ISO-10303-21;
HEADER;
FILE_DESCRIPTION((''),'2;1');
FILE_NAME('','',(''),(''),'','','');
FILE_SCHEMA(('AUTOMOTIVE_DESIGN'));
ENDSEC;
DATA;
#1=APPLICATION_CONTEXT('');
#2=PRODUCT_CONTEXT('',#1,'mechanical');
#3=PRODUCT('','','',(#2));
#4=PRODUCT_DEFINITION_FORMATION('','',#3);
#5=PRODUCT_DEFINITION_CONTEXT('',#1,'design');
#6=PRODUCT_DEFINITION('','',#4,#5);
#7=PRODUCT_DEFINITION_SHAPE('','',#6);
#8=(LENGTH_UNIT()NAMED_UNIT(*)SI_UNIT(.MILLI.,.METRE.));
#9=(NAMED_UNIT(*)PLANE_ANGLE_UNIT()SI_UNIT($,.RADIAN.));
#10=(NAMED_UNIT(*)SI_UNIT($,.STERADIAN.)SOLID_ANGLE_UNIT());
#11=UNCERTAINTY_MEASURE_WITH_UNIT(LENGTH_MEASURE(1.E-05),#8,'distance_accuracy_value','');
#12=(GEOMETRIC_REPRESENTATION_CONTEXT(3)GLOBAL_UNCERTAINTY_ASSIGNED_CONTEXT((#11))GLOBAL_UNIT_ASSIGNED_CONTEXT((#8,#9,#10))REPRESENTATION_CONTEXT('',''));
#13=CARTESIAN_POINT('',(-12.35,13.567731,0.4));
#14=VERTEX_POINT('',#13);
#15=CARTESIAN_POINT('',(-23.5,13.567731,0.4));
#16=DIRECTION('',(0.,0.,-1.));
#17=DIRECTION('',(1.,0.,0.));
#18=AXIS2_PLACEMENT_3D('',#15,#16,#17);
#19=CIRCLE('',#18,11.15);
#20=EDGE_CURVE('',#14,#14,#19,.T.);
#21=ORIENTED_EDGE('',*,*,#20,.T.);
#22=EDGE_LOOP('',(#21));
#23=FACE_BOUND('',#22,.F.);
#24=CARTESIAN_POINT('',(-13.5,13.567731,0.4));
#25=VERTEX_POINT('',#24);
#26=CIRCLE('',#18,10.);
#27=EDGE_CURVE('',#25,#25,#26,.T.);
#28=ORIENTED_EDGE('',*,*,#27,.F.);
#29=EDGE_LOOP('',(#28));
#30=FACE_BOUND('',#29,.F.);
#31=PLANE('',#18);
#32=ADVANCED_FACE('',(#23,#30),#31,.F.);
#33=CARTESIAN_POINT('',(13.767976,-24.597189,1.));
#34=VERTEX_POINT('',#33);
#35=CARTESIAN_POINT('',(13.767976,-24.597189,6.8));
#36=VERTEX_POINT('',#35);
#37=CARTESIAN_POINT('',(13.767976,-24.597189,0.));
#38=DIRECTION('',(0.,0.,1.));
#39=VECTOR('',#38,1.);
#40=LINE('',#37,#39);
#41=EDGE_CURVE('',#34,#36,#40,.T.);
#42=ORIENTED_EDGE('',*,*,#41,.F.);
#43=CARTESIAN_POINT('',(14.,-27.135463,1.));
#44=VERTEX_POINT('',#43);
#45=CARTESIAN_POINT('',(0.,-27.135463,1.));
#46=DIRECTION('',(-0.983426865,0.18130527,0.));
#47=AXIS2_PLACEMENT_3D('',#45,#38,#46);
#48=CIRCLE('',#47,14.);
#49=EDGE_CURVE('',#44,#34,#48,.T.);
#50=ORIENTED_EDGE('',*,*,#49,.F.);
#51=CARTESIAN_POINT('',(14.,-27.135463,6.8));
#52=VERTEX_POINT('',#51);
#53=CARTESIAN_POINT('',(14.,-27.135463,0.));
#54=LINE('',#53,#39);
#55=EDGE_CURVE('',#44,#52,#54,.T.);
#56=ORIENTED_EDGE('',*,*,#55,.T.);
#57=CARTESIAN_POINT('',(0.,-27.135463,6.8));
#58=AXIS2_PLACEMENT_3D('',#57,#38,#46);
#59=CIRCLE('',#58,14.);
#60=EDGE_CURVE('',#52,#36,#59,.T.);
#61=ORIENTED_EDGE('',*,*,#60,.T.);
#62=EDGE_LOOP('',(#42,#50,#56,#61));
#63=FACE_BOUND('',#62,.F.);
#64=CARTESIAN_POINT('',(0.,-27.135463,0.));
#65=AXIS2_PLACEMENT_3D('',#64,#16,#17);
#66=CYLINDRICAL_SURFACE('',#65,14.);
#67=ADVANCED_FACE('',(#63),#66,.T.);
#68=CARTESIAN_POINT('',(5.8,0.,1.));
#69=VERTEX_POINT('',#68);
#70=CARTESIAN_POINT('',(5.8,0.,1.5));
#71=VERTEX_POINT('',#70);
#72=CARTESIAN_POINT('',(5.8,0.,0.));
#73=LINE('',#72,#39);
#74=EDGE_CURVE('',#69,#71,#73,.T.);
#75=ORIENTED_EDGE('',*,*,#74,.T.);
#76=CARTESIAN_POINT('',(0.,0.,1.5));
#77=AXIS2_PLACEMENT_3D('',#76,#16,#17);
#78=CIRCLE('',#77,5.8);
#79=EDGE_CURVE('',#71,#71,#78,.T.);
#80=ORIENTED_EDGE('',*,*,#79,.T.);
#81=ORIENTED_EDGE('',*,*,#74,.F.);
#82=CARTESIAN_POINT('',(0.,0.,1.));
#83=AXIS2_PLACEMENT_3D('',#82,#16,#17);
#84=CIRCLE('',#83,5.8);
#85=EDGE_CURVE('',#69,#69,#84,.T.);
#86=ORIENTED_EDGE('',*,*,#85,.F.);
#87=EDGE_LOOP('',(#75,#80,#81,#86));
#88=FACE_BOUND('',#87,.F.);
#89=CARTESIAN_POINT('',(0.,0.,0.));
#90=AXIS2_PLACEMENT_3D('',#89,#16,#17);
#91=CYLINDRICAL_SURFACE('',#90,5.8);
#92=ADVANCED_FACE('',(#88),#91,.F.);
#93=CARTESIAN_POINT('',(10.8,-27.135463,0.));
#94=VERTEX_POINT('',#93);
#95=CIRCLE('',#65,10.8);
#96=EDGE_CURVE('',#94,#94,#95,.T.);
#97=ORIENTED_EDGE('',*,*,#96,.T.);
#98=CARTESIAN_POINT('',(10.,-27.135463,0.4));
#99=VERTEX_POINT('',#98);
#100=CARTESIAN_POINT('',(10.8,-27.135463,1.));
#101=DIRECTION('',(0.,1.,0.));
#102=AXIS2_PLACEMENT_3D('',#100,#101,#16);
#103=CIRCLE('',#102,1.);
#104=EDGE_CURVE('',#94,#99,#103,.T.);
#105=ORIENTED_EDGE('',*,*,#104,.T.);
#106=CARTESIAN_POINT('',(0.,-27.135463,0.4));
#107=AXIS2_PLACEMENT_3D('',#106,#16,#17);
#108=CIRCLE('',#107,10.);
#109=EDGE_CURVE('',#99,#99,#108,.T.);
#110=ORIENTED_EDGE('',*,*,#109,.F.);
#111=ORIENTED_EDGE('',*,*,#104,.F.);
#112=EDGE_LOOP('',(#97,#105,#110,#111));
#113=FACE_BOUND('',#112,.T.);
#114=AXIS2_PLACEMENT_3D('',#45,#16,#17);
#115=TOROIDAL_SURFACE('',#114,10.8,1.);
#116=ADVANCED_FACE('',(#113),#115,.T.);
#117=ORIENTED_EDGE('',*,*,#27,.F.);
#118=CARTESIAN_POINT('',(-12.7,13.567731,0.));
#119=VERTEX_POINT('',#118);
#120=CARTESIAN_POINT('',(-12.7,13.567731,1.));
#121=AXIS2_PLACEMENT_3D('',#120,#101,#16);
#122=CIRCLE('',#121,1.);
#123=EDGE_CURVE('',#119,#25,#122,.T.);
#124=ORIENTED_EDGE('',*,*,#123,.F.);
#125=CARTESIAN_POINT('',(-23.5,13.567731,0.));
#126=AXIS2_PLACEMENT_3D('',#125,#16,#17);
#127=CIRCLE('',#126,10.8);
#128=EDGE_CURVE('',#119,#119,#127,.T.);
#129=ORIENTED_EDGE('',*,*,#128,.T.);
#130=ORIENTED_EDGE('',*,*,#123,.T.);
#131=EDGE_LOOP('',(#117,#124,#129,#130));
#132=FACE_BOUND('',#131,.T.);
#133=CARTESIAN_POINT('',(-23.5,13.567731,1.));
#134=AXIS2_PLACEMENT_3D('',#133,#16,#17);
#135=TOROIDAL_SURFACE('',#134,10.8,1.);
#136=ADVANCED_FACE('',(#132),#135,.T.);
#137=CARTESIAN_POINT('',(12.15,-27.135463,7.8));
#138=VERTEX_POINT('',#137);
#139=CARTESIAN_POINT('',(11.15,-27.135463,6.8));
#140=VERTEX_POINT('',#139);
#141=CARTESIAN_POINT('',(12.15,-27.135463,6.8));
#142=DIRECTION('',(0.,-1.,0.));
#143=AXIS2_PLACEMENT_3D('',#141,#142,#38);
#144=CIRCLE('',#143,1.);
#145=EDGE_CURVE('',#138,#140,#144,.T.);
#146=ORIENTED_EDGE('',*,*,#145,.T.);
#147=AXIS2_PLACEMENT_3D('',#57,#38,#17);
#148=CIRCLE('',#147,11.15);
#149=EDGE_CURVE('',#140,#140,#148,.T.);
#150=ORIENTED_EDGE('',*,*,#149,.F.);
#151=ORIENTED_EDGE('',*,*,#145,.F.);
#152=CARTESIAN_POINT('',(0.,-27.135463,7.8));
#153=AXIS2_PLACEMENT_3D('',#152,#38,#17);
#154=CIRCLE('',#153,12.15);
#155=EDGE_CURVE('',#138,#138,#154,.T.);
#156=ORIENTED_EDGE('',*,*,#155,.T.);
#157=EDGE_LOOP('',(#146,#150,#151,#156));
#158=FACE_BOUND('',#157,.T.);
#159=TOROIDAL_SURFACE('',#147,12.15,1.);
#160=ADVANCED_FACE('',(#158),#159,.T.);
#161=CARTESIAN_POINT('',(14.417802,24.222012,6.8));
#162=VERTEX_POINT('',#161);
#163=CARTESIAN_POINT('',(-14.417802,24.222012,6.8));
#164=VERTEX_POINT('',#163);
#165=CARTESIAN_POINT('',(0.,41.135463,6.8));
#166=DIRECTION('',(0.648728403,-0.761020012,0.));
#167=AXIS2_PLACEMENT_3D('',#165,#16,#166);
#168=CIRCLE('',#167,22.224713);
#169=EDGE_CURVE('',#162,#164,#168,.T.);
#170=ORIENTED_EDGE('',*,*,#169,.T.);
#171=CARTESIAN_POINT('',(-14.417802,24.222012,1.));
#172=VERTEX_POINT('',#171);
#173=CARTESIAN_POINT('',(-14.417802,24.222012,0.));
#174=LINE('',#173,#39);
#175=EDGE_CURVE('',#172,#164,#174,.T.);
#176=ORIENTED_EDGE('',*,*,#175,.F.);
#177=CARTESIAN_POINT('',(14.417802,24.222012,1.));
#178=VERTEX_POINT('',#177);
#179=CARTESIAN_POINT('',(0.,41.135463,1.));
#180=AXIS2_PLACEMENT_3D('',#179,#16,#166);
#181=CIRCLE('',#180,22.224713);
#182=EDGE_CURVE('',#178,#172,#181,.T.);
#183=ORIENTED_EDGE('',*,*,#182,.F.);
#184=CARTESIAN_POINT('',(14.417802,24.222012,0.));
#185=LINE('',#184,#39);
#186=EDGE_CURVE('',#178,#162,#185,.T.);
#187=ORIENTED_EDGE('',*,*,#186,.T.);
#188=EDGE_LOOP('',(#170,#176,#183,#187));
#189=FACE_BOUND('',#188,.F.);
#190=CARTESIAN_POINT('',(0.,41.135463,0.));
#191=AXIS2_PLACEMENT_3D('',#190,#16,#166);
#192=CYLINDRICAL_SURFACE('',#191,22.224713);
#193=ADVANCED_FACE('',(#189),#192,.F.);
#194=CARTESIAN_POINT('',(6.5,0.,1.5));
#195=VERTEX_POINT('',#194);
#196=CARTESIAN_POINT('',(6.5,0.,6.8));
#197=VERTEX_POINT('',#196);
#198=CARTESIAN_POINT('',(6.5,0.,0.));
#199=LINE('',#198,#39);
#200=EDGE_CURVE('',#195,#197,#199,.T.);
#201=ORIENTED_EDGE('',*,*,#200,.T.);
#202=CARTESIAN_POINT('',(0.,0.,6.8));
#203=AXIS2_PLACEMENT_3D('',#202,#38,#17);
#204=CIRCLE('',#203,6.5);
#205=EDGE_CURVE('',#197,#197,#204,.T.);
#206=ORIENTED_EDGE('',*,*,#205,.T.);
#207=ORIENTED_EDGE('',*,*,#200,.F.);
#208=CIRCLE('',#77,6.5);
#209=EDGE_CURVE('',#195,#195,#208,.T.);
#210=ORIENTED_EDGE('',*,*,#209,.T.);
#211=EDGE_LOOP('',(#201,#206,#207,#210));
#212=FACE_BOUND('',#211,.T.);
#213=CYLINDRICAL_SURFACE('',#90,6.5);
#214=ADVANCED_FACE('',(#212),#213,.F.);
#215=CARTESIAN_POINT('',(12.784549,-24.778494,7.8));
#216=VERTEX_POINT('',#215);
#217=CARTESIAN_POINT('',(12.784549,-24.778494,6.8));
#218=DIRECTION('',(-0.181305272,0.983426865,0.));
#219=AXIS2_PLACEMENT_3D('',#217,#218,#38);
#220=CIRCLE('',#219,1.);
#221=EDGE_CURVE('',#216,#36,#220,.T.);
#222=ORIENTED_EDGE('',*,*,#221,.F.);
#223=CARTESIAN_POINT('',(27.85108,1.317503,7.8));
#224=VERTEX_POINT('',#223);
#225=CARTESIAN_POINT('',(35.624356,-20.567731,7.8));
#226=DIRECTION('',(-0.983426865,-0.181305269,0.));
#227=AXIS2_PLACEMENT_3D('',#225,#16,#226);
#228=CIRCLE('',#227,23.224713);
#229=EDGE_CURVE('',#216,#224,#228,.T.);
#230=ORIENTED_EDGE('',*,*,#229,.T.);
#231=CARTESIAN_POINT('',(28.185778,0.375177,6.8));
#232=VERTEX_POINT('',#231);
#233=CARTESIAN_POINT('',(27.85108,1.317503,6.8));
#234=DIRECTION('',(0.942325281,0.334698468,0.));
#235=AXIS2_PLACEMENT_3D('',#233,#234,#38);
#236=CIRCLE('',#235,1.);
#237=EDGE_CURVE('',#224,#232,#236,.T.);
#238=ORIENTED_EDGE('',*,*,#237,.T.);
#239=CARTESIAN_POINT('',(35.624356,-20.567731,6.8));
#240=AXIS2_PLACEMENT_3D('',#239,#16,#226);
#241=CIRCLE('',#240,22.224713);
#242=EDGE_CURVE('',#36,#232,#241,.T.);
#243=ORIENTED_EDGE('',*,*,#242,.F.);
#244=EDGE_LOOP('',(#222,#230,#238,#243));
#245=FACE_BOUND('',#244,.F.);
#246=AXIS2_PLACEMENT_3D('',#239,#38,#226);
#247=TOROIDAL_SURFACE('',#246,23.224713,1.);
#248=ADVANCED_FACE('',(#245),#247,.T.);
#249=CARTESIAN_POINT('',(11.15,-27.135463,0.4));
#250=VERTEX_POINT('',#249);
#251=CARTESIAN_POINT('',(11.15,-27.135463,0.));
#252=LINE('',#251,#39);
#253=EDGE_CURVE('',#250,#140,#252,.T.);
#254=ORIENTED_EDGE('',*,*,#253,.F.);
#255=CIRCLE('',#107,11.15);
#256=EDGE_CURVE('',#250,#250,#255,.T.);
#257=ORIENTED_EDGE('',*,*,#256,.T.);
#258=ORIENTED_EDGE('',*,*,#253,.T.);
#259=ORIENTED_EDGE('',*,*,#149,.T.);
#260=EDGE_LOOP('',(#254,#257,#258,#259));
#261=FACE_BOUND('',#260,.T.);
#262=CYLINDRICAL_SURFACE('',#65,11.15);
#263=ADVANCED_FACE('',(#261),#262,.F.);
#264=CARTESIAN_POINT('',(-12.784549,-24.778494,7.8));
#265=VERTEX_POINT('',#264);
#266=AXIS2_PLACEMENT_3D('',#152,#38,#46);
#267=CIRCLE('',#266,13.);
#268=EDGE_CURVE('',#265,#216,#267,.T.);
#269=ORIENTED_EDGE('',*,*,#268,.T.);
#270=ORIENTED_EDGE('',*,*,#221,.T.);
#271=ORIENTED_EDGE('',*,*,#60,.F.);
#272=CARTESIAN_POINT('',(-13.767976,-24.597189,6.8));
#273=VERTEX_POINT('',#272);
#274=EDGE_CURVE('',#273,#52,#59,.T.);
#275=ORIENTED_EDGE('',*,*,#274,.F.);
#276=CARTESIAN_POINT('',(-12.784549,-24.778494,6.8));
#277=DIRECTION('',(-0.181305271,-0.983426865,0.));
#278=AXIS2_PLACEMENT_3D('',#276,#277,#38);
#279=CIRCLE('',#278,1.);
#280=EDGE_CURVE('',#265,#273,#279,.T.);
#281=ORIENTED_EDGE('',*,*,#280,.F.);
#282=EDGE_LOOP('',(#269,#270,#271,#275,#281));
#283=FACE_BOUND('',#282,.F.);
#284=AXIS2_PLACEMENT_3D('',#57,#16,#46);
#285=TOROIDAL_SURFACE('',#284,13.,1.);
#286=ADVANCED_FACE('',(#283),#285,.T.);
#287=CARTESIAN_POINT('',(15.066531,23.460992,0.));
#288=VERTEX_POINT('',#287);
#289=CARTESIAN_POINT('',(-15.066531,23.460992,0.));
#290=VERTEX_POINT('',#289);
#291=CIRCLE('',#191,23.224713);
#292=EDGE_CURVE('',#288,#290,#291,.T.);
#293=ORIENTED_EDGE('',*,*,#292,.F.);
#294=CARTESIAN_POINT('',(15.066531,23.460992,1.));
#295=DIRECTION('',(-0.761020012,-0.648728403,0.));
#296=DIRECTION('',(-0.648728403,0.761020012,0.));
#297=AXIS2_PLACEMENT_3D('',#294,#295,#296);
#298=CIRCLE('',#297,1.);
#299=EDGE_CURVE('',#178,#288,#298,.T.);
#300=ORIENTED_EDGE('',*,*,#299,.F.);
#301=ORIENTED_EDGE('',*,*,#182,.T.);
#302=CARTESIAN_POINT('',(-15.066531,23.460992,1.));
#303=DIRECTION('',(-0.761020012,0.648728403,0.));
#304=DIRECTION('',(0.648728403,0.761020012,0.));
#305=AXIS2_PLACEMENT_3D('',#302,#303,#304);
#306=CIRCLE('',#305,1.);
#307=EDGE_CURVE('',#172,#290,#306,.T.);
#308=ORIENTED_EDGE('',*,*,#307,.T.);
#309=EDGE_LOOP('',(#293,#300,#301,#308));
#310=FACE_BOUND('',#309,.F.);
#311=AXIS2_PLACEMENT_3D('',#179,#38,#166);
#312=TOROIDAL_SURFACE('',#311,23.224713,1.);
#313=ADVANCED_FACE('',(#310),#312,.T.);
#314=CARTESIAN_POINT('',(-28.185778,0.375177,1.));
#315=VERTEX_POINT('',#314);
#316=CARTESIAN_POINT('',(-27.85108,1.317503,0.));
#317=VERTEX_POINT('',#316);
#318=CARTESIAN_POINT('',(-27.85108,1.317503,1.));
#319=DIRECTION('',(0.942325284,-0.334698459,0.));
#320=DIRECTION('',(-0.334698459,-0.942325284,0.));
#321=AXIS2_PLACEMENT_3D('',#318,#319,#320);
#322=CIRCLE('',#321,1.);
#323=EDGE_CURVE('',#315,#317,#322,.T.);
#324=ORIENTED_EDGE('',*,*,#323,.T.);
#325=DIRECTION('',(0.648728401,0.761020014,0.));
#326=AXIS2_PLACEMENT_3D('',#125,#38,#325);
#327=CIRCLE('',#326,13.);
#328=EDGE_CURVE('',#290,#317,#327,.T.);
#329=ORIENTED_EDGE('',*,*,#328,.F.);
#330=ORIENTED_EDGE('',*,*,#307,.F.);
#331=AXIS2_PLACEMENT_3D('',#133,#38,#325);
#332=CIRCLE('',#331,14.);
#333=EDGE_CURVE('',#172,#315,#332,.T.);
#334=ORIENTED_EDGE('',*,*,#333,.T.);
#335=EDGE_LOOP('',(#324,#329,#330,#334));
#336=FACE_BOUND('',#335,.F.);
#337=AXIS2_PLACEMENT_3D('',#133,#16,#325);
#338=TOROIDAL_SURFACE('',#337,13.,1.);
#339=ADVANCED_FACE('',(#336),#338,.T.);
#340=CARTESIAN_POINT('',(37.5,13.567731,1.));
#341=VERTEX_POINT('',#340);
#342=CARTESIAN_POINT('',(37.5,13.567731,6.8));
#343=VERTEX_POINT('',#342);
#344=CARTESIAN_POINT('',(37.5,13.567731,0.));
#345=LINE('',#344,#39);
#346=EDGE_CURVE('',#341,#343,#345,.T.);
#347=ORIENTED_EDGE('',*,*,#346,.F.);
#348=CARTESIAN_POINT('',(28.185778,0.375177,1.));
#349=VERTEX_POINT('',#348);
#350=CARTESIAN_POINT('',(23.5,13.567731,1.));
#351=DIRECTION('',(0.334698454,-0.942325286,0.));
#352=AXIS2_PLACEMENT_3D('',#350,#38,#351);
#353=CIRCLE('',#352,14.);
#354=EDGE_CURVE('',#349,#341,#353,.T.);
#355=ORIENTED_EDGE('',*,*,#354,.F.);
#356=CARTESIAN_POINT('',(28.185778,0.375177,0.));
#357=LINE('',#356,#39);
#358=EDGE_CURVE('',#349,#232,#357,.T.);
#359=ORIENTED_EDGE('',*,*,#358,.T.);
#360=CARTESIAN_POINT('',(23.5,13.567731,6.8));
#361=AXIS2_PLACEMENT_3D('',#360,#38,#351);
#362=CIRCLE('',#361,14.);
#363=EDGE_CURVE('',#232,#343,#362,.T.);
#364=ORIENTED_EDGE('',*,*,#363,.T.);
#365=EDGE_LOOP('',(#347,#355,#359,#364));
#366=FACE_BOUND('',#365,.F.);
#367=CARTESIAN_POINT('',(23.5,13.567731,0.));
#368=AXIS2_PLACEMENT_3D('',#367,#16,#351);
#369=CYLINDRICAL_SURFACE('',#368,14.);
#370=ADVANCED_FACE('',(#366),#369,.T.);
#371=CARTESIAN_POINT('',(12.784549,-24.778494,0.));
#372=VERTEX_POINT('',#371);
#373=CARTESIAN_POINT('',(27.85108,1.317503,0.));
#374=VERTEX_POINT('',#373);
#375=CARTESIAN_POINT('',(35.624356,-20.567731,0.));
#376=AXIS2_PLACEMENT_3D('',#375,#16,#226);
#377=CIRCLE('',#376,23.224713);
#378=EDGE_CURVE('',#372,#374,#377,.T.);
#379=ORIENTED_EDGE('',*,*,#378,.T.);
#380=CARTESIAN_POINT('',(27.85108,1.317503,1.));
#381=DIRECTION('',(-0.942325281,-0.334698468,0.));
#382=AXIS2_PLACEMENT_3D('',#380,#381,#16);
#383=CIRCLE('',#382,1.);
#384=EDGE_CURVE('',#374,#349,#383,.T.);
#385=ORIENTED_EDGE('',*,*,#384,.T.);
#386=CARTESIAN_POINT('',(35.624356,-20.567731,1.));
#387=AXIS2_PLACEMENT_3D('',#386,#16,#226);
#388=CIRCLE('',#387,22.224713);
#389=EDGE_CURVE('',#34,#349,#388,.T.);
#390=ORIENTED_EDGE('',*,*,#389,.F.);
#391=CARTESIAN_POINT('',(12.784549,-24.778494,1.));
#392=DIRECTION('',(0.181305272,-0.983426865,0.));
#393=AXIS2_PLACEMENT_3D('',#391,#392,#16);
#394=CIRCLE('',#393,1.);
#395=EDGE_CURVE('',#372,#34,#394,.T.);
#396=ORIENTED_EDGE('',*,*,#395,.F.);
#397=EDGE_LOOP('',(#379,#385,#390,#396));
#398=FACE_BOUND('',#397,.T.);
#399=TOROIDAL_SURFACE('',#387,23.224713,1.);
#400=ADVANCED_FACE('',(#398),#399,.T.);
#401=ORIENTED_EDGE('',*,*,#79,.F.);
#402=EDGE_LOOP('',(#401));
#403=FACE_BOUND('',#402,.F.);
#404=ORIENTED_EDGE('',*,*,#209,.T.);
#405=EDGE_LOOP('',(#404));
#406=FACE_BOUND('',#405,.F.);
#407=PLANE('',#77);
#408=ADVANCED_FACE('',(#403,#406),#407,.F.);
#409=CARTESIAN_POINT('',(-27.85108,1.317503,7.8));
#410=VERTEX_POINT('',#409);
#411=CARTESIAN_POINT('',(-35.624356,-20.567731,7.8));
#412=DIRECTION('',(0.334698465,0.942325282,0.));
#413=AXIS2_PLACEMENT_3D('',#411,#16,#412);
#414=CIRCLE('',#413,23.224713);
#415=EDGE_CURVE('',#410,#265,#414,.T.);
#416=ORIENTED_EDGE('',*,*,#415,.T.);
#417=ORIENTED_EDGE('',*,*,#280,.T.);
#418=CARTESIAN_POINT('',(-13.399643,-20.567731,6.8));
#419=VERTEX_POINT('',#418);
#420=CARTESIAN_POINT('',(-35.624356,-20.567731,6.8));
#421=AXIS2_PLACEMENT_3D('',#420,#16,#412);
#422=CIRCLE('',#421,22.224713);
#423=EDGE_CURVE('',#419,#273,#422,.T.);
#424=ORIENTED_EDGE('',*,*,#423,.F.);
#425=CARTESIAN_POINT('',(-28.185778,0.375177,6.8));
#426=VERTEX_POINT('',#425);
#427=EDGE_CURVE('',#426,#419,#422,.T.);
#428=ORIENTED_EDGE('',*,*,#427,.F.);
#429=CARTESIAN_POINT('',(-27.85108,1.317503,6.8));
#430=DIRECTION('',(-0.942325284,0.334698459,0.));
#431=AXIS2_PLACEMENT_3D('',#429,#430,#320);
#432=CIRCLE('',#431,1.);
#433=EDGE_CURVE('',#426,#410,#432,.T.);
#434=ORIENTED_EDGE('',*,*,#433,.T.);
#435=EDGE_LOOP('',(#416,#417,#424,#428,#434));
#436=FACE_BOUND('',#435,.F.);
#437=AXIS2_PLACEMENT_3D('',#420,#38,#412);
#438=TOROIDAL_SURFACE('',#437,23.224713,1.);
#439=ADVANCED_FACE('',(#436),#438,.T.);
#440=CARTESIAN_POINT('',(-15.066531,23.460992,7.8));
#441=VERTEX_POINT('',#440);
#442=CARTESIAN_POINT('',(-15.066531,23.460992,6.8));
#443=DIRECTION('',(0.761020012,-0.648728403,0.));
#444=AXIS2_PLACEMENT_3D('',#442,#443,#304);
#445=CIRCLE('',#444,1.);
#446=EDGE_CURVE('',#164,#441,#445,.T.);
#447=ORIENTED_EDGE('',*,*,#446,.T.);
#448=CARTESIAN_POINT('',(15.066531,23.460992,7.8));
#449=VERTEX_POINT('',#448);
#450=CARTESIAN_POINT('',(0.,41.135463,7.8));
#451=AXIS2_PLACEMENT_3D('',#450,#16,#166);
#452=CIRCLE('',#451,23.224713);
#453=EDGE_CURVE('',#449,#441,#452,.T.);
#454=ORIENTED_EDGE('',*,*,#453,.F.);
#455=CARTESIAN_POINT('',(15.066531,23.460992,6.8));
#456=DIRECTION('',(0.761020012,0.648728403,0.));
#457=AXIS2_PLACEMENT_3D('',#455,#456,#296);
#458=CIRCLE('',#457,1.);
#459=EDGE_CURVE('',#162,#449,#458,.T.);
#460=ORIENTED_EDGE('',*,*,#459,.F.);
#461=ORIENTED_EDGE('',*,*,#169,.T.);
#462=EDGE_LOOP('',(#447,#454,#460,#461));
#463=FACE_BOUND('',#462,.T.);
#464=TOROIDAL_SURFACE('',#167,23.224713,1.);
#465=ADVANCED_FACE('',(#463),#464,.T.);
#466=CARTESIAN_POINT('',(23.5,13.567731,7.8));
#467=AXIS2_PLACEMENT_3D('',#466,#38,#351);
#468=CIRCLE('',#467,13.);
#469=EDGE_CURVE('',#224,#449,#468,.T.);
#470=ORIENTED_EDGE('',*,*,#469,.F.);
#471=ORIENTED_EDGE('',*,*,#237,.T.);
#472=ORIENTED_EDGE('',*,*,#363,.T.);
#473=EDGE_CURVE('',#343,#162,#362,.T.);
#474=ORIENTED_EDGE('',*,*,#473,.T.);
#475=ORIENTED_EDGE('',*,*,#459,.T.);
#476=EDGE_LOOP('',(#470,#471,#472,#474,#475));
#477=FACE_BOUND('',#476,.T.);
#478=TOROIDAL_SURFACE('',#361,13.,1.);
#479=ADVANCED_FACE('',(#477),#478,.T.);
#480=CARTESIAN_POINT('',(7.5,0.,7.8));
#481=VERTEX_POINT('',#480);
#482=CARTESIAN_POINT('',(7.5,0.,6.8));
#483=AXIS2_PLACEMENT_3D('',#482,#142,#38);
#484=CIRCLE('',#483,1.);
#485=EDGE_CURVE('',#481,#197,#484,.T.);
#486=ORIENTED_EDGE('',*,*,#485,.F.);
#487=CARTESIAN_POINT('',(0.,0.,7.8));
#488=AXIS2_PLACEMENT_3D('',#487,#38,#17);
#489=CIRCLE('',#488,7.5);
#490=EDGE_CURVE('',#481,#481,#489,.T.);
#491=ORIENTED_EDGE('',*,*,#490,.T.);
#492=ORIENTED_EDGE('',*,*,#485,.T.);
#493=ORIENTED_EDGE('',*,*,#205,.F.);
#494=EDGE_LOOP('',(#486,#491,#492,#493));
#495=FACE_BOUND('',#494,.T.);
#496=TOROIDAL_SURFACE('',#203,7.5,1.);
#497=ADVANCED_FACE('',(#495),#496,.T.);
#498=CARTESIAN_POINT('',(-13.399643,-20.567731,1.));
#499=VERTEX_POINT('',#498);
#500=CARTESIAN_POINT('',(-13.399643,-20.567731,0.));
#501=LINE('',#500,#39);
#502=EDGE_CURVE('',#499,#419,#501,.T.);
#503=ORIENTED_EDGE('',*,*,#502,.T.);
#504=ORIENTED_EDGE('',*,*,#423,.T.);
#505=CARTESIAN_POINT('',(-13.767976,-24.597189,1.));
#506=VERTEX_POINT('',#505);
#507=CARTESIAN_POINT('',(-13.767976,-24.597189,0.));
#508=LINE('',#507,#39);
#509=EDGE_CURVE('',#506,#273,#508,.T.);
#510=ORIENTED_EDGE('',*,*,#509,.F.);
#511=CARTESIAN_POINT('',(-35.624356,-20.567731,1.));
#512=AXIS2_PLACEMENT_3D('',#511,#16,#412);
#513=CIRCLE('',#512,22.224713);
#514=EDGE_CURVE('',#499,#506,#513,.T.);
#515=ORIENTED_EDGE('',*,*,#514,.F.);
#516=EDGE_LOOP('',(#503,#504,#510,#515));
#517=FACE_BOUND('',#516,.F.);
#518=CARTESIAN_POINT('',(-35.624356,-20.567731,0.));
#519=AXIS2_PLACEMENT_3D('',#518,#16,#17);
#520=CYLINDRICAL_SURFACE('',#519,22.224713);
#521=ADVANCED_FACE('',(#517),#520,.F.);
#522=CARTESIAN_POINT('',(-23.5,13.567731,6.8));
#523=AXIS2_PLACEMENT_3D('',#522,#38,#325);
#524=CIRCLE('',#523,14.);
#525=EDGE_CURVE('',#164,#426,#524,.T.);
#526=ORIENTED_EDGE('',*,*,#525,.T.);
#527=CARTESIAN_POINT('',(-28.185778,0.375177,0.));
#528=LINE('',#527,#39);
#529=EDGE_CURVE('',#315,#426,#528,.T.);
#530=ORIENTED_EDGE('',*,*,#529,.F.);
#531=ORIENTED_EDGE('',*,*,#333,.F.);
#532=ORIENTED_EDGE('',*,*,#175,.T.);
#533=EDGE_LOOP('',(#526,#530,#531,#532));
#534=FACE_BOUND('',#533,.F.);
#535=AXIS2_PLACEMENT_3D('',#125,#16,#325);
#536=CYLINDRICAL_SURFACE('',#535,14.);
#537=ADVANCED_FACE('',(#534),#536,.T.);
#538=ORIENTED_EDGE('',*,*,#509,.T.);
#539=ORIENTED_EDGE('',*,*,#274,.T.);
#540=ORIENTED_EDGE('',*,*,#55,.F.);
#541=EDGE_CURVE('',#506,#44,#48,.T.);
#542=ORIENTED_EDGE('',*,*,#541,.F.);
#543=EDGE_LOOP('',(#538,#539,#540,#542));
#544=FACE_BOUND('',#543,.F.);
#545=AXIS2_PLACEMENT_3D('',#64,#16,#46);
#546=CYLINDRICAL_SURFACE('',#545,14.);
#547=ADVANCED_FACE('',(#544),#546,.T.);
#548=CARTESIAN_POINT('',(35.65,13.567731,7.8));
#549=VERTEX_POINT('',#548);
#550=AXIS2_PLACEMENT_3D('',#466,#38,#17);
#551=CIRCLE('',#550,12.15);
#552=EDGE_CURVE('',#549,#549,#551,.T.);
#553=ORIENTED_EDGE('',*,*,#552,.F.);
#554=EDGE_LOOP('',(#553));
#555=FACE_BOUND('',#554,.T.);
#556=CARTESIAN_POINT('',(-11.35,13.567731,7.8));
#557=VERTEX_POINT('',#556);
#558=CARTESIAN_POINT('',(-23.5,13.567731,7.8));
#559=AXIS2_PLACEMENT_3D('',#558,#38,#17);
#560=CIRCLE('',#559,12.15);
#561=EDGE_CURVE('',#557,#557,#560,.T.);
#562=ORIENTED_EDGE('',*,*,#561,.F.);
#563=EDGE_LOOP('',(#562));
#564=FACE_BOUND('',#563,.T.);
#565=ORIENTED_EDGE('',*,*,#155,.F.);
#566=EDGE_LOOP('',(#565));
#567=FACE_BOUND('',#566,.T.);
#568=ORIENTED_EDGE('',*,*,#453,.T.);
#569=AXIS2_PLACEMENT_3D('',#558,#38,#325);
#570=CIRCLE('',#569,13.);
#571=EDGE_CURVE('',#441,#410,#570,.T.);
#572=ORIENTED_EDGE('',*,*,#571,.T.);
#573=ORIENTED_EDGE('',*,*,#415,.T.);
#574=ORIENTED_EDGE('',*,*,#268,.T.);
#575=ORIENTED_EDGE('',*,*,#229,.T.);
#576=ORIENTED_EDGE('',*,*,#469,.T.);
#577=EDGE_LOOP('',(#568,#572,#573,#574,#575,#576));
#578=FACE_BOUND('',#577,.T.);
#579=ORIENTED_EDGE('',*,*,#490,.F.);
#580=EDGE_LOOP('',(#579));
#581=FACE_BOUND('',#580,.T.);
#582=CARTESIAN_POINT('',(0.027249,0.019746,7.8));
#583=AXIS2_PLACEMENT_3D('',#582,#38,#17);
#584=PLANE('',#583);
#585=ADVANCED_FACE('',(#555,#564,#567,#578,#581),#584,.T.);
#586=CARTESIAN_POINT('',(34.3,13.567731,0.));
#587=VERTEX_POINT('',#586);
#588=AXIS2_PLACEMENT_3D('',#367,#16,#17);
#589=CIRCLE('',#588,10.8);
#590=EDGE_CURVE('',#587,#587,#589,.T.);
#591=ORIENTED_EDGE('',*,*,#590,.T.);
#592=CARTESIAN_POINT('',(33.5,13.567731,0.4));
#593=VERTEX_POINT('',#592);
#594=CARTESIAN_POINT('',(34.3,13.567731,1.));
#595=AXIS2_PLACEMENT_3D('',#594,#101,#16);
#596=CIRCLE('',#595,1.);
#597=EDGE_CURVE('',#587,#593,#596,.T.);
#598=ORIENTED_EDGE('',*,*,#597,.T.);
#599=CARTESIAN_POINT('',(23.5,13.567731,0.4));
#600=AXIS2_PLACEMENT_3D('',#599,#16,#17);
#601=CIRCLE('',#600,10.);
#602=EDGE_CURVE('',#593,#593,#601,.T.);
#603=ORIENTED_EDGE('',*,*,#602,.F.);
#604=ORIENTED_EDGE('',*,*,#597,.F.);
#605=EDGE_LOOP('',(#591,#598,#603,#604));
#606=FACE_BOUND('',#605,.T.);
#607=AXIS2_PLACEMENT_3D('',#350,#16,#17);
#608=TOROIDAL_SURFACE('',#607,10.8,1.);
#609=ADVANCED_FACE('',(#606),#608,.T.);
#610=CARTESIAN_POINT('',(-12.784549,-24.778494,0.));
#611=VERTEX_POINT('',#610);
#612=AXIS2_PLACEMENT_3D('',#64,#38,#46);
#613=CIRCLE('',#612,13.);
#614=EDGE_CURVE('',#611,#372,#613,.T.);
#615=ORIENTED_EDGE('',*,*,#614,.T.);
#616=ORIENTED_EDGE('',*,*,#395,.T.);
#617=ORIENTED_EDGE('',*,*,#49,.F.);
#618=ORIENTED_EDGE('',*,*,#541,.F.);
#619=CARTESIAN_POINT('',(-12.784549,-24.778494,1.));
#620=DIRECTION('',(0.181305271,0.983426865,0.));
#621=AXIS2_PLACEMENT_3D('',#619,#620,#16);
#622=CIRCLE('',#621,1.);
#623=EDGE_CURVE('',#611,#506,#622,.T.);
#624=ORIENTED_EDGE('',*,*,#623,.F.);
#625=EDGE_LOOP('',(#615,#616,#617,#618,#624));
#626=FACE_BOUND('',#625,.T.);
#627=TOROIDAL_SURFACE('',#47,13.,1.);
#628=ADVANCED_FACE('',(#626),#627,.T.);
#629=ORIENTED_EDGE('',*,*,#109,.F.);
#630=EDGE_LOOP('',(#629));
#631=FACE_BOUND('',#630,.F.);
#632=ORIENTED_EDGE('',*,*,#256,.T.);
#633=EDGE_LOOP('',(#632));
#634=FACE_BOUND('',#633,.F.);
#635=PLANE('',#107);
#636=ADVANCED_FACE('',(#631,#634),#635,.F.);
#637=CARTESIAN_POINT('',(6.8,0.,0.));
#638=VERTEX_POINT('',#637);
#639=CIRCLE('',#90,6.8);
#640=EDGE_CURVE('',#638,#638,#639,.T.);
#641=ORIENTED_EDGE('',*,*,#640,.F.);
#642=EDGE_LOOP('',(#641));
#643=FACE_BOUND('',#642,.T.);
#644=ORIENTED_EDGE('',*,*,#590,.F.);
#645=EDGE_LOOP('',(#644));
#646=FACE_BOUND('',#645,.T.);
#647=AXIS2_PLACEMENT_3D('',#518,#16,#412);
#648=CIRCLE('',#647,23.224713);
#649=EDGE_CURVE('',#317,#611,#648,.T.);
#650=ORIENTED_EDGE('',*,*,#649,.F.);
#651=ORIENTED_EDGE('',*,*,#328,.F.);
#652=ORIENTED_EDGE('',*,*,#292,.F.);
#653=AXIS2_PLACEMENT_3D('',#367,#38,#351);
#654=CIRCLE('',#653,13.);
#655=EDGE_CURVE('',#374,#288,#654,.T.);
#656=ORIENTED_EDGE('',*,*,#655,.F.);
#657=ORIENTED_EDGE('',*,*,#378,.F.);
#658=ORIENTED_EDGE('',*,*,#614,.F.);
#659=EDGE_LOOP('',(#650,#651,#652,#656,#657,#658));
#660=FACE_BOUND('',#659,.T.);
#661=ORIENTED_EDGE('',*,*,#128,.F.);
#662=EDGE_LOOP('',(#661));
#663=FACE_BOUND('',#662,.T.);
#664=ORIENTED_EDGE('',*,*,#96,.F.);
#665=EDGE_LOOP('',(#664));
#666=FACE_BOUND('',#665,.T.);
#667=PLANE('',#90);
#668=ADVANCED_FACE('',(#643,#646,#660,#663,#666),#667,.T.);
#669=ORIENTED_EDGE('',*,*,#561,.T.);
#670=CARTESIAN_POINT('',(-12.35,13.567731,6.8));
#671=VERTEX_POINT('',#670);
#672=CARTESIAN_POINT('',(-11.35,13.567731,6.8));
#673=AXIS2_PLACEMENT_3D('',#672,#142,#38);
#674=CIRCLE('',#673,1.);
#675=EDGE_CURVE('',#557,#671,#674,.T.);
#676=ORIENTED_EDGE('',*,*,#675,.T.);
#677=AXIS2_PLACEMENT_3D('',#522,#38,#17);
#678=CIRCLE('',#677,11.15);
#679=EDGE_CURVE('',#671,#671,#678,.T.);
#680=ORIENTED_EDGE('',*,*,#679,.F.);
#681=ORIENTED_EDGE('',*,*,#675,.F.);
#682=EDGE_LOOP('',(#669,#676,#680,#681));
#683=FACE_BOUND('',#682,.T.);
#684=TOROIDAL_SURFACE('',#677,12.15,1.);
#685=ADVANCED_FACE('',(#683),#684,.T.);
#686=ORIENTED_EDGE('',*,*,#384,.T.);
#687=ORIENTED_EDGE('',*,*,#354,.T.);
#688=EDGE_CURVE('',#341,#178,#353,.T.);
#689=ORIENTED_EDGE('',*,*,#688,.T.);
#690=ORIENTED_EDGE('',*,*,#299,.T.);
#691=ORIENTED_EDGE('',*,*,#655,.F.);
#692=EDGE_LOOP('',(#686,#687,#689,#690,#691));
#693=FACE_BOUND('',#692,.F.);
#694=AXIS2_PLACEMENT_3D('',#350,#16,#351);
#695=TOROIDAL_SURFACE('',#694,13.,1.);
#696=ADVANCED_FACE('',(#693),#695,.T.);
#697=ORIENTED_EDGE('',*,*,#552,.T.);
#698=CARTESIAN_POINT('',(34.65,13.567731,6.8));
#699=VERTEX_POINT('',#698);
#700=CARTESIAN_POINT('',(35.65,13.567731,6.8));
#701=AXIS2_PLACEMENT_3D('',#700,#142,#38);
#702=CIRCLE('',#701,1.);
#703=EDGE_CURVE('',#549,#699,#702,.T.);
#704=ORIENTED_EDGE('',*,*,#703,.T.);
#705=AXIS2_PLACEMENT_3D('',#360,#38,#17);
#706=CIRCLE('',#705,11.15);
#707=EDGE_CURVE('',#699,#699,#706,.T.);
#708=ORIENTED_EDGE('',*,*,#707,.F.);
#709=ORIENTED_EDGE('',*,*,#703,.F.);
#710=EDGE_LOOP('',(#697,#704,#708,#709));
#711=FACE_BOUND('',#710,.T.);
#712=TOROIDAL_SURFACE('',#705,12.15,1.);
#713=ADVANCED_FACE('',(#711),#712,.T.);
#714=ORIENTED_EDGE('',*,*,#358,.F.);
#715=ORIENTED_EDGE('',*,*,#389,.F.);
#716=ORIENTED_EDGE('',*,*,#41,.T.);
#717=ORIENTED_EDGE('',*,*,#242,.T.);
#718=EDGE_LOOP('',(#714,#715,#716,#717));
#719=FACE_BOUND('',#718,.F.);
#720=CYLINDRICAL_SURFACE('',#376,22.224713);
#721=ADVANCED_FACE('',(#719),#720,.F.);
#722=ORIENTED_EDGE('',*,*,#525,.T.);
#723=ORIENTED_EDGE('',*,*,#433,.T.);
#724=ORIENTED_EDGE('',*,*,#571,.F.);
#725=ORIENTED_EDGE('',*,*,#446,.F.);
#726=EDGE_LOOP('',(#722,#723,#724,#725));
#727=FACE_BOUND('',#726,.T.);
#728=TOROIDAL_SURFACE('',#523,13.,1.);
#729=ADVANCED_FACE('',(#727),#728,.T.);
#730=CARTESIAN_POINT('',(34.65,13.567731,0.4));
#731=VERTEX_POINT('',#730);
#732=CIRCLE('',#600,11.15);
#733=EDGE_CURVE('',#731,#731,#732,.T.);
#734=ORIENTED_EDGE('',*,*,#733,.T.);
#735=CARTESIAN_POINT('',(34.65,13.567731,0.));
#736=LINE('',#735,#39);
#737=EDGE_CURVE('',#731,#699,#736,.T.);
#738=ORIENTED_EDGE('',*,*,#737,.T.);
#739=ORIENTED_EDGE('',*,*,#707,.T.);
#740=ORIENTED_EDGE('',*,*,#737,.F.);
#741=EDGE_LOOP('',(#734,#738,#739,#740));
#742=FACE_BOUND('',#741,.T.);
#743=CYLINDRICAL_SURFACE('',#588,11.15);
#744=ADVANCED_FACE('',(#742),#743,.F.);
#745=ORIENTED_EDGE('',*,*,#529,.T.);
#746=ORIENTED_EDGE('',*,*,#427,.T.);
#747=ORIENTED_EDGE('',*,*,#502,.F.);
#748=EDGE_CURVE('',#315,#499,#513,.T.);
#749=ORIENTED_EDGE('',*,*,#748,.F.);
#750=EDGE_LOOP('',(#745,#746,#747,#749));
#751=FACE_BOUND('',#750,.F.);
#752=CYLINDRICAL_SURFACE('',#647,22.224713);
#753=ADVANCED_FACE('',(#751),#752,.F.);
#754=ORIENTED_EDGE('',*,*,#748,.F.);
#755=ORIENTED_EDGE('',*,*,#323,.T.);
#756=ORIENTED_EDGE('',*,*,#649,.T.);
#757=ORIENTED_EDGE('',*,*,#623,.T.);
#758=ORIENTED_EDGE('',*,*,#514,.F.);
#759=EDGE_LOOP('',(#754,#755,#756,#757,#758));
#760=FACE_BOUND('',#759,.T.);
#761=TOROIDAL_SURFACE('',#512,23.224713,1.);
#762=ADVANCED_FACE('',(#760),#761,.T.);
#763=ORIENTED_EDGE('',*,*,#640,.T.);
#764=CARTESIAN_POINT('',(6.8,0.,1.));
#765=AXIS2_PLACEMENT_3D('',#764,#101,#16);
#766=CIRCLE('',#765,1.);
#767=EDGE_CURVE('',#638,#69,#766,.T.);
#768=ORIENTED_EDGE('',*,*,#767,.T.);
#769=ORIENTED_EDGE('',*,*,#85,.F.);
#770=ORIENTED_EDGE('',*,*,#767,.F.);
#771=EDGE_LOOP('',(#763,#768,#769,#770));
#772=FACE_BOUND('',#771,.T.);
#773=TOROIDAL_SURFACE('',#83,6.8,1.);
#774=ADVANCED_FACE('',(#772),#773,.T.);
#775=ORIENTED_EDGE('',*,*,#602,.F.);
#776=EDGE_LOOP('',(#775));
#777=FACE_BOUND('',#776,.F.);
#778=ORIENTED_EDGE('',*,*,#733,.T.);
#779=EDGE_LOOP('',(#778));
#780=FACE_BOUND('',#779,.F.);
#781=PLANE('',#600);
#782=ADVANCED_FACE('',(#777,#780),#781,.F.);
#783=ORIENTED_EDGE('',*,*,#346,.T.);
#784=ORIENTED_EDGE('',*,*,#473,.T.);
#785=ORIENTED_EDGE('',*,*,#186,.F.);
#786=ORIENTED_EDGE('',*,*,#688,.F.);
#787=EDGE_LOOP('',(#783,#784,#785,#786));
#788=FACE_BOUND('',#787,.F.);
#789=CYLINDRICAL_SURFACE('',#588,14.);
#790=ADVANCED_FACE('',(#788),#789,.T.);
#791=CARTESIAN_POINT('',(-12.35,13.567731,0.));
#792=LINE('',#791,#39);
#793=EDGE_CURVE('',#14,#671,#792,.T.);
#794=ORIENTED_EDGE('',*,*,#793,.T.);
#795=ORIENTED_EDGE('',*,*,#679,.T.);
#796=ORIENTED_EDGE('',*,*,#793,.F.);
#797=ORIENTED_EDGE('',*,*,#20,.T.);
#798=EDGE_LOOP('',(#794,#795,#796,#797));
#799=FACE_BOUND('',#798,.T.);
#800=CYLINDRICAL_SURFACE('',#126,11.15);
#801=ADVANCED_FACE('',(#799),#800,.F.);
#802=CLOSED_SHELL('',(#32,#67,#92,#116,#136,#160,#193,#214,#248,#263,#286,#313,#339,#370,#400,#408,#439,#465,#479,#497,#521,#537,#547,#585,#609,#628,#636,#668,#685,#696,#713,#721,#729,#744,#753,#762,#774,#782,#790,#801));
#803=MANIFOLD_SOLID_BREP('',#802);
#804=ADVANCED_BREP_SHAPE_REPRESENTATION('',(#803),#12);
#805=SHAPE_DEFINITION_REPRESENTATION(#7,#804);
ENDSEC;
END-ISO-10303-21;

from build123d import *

# Parameters (mm, degrees)
F0_R         = 6.5
F0_R_2       = 11.15
F1_DEPTH     = 7.8
F2_R         = 11.15
F2_R_2       = 10
F3_DEPTH     = 0.4
F4_R         = 6.5
F4_R_2       = 5.8
F5_DEPTH     = 1.5
F6_T10_ANGLE = 80.8915948213
F6_T12_ANGLE = 200.8915947618
F6_T14_ANGLE = 80.8915945525
F6_T16_ANGLE = 200.8915947547
F6_T18_ANGLE = 80.8915942666
F6_T20_ANGLE = 200.8915950895
F6_T22_ANGLE = 80.8915948213
F6_T24_ANGLE = 200.8915947618
F6_T26_ANGLE = 80.8915945525
F6_T28_ANGLE = 200.8915947547
F6_T30_ANGLE = 80.8915942666
F6_T32_ANGLE = 200.8915950895


# Not quite as in the source:
# - a fillet or chamfer that OpenCascade refuses, or shapes differently, is made with other operations: its cross-section is extruded or revolved along the edge and cut away or added


with BuildPart() as f1:
    # F0 (on Top) → F1 (new body)
    with BuildSketch(Plane.XY):
        with BuildLine():
            ThreePointArc((-14.4178023884, 24.2220115243), (-10.7887694034, 19.434980828), (-9.5, 13.567731326))
            ThreePointArc((-9.5, 13.567731326), (-15.4253761081, 2.1309289317), (-28.1857784292, 0.3751773461))
            ThreePointArc((-28.1857784292, 0.3751773461), (-17.4686665105, -7.7494316525), (-13.3996429494, -20.567731326))
            ThreePointArc((-13.3996429494, -20.567731326), (-13.4919177982, -22.5908599334), (-13.7679761122, -24.5971888737))
            ThreePointArc((-13.7679761122, -24.5971888737), (-1.54e-08, -13.1354626519), (13.7679761066, -24.5971888434))
            ThreePointArc((13.7679761066, -24.5971888434), (16.3771898334, -9.4553750199), (28.1857783538, 0.3751773193))
            ThreePointArc((28.1857783538, 0.3751773193), (11.3756443069, 6.5677313954), (14.4178023884, 24.2220115243))
            ThreePointArc((14.4178023884, 24.2220115243), (0, 18.9107499483), (-14.4178023884, 24.2220115243))
        make_face()
        Circle(F0_R, mode=Mode.SUBTRACT)
        with BuildLine():
            ThreePointArc((-28.1857784292, 0.3751773461), (-15.4253761081, 2.1309289317), (-9.5, 13.567731326))
            ThreePointArc((-9.5, 13.567731326), (-10.7887694034, 19.434980828), (-14.4178023884, 24.2220115243))
            ThreePointArc((-14.4178023884, 24.2220115243), (-35.6243556731, 20.5677312911), (-28.1857784292, 0.3751773461))
        make_face()
        with Locations((-23.5, 13.567731326)):
            Circle(F0_R_2, mode=Mode.SUBTRACT)
        with BuildLine():
            ThreePointArc((37.5, 13.567731326), (29.367249502, 26.2789619226), (14.4178023884, 24.2220115243))
            ThreePointArc((14.4178023884, 24.2220115243), (11.3756443069, 6.5677313954), (28.1857783538, 0.3751773193))
            ThreePointArc((28.1857783538, 0.3751773193), (34.9368023711, 5.4931074014), (37.5, 13.567731326))
        make_face()
        with Locations((23.5, 13.567731326)):
            Circle(F0_R_2, mode=Mode.SUBTRACT)
        with BuildLine():
            ThreePointArc((13.7679761066, -24.5971888434), (-1.54e-08, -13.1354626519), (-13.7679761122, -24.5971888737))
            ThreePointArc((-13.7679761122, -24.5971888737), (-1.2744281911, -41.0773360119), (14, -27.1354626519))
            ThreePointArc((14, -27.1354626519), (13.9418733586, -25.8610344454), (13.7679761066, -24.5971888434))
        make_face()
        with Locations((0, -27.1354626519)):
            Circle(F0_R_2, mode=Mode.SUBTRACT)
    extrude(amount=F1_DEPTH)

    # F2 (on face) → F3 (join)
    with BuildSketch(Plane(origin=(0, 0, 0), x_dir=(1, 0, 0), z_dir=(0, 0, -1))):
        with Locations((0, 27.1354626519)):
            Circle(F2_R)
        with Locations((0, 27.1354626519)):
            Circle(F2_R_2, mode=Mode.SUBTRACT)
        with Locations((23.5, -13.567731326)):
            Circle(F2_R)
        with Locations((23.5, -13.567731326)):
            Circle(F2_R_2, mode=Mode.SUBTRACT)
        with Locations((-23.5, -13.567731326)):
            Circle(F2_R)
        with Locations((-23.5, -13.567731326)):
            Circle(F2_R_2, mode=Mode.SUBTRACT)
    extrude(amount=-F3_DEPTH)

    # F4 (on face) → F5 (join)
    with BuildSketch(Plane(origin=(0, 0, 0), x_dir=(1, 0, 0), z_dir=(0, 0, -1))):
        Circle(F4_R)
        Circle(F4_R_2, mode=Mode.SUBTRACT)
    extrude(amount=-F5_DEPTH)

    # F6: fillet of radius 1 on 20 edges, made by hand

    # F6_s1 → F6_t2 (revolve, cut)
    with BuildSketch(Plane.XZ.offset(-13.567731326)):
        with BuildLine():
            ThreePointArc((-11.35, 7.8), (-12.0571067812, 7.5071067812), (-12.35, 6.8))
            Line((-12.35, 6.8), (-12.35, 7.8))
            Line((-12.35, 7.8), (-11.35, 7.8))
        make_face()
    revolve(axis=Axis((-23.5, 13.567731326, 7.8), (0, 0, 1)), mode=Mode.SUBTRACT)

    # F6_s3 → F6_t4 (revolve, cut)
    with BuildSketch(Plane.XZ.offset(27.1354626519)):
        with BuildLine():
            ThreePointArc((12.15, 7.8), (11.4428932188, 7.5071067812), (11.15, 6.8))
            Line((11.15, 6.8), (11.15, 7.8))
            Line((11.15, 7.8), (12.15, 7.8))
        make_face()
    revolve(axis=Axis((0, -27.1354626519, 7.8), (0, 0, 1)), mode=Mode.SUBTRACT)

    # F6_s5 → F6_t6 (revolve, cut)
    with BuildSketch(Plane.XZ):
        with BuildLine():
            ThreePointArc((7.5, 7.8), (6.7928932188, 7.5071067812), (6.5, 6.8))
            Line((6.5, 6.8), (6.5, 7.8))
            Line((6.5, 7.8), (7.5, 7.8))
        make_face()
    revolve(axis=Axis((0, 0, 7.8), (0, 0, 1)), mode=Mode.SUBTRACT)

    # F6_s7 → F6_t8 (revolve, cut)
    with BuildSketch(Plane.XZ.offset(-13.567731326)):
        with BuildLine():
            ThreePointArc((35.65, 7.8), (34.9428932188, 7.5071067812), (34.65, 6.8))
            Line((34.65, 6.8), (34.65, 7.8))
            Line((34.65, 7.8), (35.65, 7.8))
        make_face()
    revolve(axis=Axis((23.5, 13.567731326, 7.8), (0, 0, 1)), mode=Mode.SUBTRACT)

    # F6_s9 → F6_t10 (revolve, cut)
    with BuildSketch(Plane(origin=(20.3083844645, 17.3117994564, 0), x_dir=(0, 0, 1), z_dir=(0.761020012, 0.6487284034, 0))):
        with BuildLine():
            ThreePointArc((6.8, -9.0801975759), (7.5071067812, -8.7873043571), (7.8, -8.0801975759))
            Line((7.8, -8.0801975759), (7.8, -9.0801975759))
            Line((7.8, -9.0801975759), (6.8, -9.0801975759))
        make_face()
    revolve(axis=Axis((0, 41.1354626519, 7.8), (0, 0, -1)), revolution_arc=F6_T10_ANGLE, mode=Mode.SUBTRACT)

    # F6_s11 → F6_t12 (revolve, cut)
    with BuildSketch(Plane(origin=(-20.3083844997, 17.3117993675, 0), x_dir=(0, 0, 1), z_dir=(0.7610200142, -0.6487284008, 0))):
        with BuildLine():
            ThreePointArc((6.8, -9.0801976664), (7.5071067812, -8.7873044476), (7.8, -8.0801976664))
            Line((7.8, -8.0801976664), (7.8, -9.0801976664))
            Line((7.8, -9.0801976664), (6.8, -9.0801976664))
        make_face()
    revolve(axis=Axis((-23.5, 13.567731326, 7.8), (0, 0, 1)), revolution_arc=F6_T12_ANGLE, mode=Mode.SUBTRACT)

    # F6_s13 → F6_t14 (revolve, cut)
    with BuildSketch(Plane(origin=(-25.1466502077, 8.9316771809, 0), x_dir=(0, 0, 1), z_dir=(-0.9423252823, 0.3346984649, 0))):
        with BuildLine():
            ThreePointArc((7.8, -8.0801976725), (7.5071067812, -8.7873044537), (6.8, -9.0801976725))
            Line((6.8, -9.0801976725), (7.8, -9.0801976725))
            Line((7.8, -9.0801976725), (7.8, -8.0801976725))
        make_face()
    revolve(axis=Axis((-35.624355653, -20.567731326, 7.8), (0, 0, -1)), revolution_arc=F6_T14_ANGLE, mode=Mode.SUBTRACT)

    # F6_s15 → F6_t16 (revolve, cut)
    with BuildSketch(Plane(origin=(-4.8382658309, -26.2434765539, 0), x_dir=(0, 0, 1), z_dir=(0.1813052699, 0.9834268652, 0))):
        with BuildLine():
            ThreePointArc((7.8, -8.0801976209), (7.5071067812, -8.787304402), (6.8, -9.0801976209))
            Line((6.8, -9.0801976209), (7.8, -9.0801976209))
            Line((7.8, -9.0801976209), (7.8, -8.0801976209))
        make_face()
    revolve(axis=Axis((0, -27.1354626519, 7.8), (0, 0, 1)), revolution_arc=F6_T16_ANGLE, mode=Mode.SUBTRACT)

    # F6_s17 → F6_t18 (revolve, cut)
    with BuildSketch(Plane(origin=(4.8382658036, -26.2434765203, 0), x_dir=(0, 0, 1), z_dir=(0.1813052691, -0.9834268653, 0))):
        with BuildLine():
            ThreePointArc((7.8, -8.0801976417), (7.5071067812, -8.7873044229), (6.8, -9.0801976417))
            Line((6.8, -9.0801976417), (7.8, -9.0801976417))
            Line((7.8, -9.0801976417), (7.8, -8.0801976417))
        make_face()
    revolve(axis=Axis((35.624355653, -20.567731326, 7.8), (0, 0, -1)), revolution_arc=F6_T18_ANGLE, mode=Mode.SUBTRACT)

    # F6_s19 → F6_t20 (revolve, cut)
    with BuildSketch(Plane(origin=(25.1466503366, 8.9316768958, 0), x_dir=(0, 0, 1), z_dir=(-0.9423252862, -0.3346984538, 0))):
        with BuildLine():
            ThreePointArc((6.8, -9.0801973606), (7.5071067812, -8.7873041418), (7.8, -8.0801973606))
            Line((7.8, -8.0801973606), (7.8, -9.0801973606))
            Line((7.8, -9.0801973606), (6.8, -9.0801973606))
        make_face()
    revolve(axis=Axis((23.5, 13.567731326, 7.8), (0, 0, 1)), revolution_arc=F6_T20_ANGLE, mode=Mode.SUBTRACT)

    # F6_s21 → F6_t22 (revolve, cut)
    with BuildSketch(Plane(origin=(20.3083844645, 17.3117994564, 0), x_dir=(0, 0, 1), z_dir=(0.761020012, 0.6487284034, 0))):
        with BuildLine():
            ThreePointArc((1, -9.0801975759), (0.2928932188, -8.7873043571), (0, -8.0801975759))
            Line((0, -8.0801975759), (0, -9.0801975759))
            Line((0, -9.0801975759), (1, -9.0801975759))
        make_face()
    revolve(axis=Axis((0, 41.1354626519, 0), (0, 0, -1)), revolution_arc=F6_T22_ANGLE, mode=Mode.SUBTRACT)

    # F6_s23 → F6_t24 (revolve, cut)
    with BuildSketch(Plane(origin=(-20.3083844997, 17.3117993675, 0), x_dir=(0, 0, 1), z_dir=(0.7610200142, -0.6487284008, 0))):
        with BuildLine():
            ThreePointArc((1, -9.0801976664), (0.2928932188, -8.7873044476), (0, -8.0801976664))
            Line((0, -8.0801976664), (0, -9.0801976664))
            Line((0, -9.0801976664), (1, -9.0801976664))
        make_face()
    revolve(axis=Axis((-23.5, 13.567731326, 0), (0, 0, 1)), revolution_arc=F6_T24_ANGLE, mode=Mode.SUBTRACT)

    # F6_s25 → F6_t26 (revolve, cut)
    with BuildSketch(Plane(origin=(-25.1466502077, 8.9316771809, 0), x_dir=(0, 0, 1), z_dir=(-0.9423252823, 0.3346984649, 0))):
        with BuildLine():
            ThreePointArc((0, -8.0801976725), (0.2928932188, -8.7873044537), (1, -9.0801976725))
            Line((1, -9.0801976725), (0, -9.0801976725))
            Line((0, -9.0801976725), (0, -8.0801976725))
        make_face()
    revolve(axis=Axis((-35.624355653, -20.567731326, 0), (0, 0, -1)), revolution_arc=F6_T26_ANGLE, mode=Mode.SUBTRACT)

    # F6_s27 → F6_t28 (revolve, cut)
    with BuildSketch(Plane(origin=(-4.8382658309, -26.2434765539, 0), x_dir=(0, 0, 1), z_dir=(0.1813052699, 0.9834268652, 0))):
        with BuildLine():
            ThreePointArc((0, -8.0801976209), (0.2928932188, -8.787304402), (1, -9.0801976209))
            Line((1, -9.0801976209), (0, -9.0801976209))
            Line((0, -9.0801976209), (0, -8.0801976209))
        make_face()
    revolve(axis=Axis((0, -27.1354626519, 0), (0, 0, 1)), revolution_arc=F6_T28_ANGLE, mode=Mode.SUBTRACT)

    # F6_s29 → F6_t30 (revolve, cut)
    with BuildSketch(Plane(origin=(4.8382658036, -26.2434765203, 0), x_dir=(0, 0, 1), z_dir=(0.1813052691, -0.9834268653, 0))):
        with BuildLine():
            ThreePointArc((0, -8.0801976417), (0.2928932188, -8.7873044229), (1, -9.0801976417))
            Line((1, -9.0801976417), (0, -9.0801976417))
            Line((0, -9.0801976417), (0, -8.0801976417))
        make_face()
    revolve(axis=Axis((35.624355653, -20.567731326, 0), (0, 0, -1)), revolution_arc=F6_T30_ANGLE, mode=Mode.SUBTRACT)

    # F6_s31 → F6_t32 (revolve, cut)
    with BuildSketch(Plane(origin=(25.1466503366, 8.9316768958, 0), x_dir=(0, 0, 1), z_dir=(-0.9423252862, -0.3346984538, 0))):
        with BuildLine():
            ThreePointArc((1, -9.0801973606), (0.2928932188, -8.7873041418), (0, -8.0801973606))
            Line((0, -8.0801973606), (0, -9.0801973606))
            Line((0, -9.0801973606), (1, -9.0801973606))
        make_face()
    revolve(axis=Axis((23.5, 13.567731326, 0), (0, 0, 1)), revolution_arc=F6_T32_ANGLE, mode=Mode.SUBTRACT)

    # F6_s33 → F6_t34 (revolve, cut)
    with BuildSketch(Plane.XZ.offset(-13.567731326)):
        with BuildLine():
            ThreePointArc((-12.7, 0), (-13.1472135955, 0.105572809), (-13.5, 0.4))
            Line((-13.5, 0.4), (-13.5, 0))
            Line((-13.5, 0), (-12.7, 0))
        make_face()
    revolve(axis=Axis((-23.5, 13.567731326, 0), (0, 0, -1)), mode=Mode.SUBTRACT)

    # F6_s35 → F6_t36 (revolve, cut)
    with BuildSketch(Plane.XZ.offset(-13.567731326)):
        with BuildLine():
            ThreePointArc((34.3, 0), (33.8527864045, 0.105572809), (33.5, 0.4))
            Line((33.5, 0.4), (33.5, 0))
            Line((33.5, 0), (34.3, 0))
        make_face()
    revolve(axis=Axis((23.5, 13.567731326, 0), (0, 0, -1)), mode=Mode.SUBTRACT)

    # F6_s37 → F6_t38 (revolve, cut)
    with BuildSketch(Plane.XZ.offset(27.1354626519)):
        with BuildLine():
            ThreePointArc((10.8, 0), (10.3527864045, 0.105572809), (10, 0.4))
            Line((10, 0.4), (10, 0))
            Line((10, 0), (10.8, 0))
        make_face()
    revolve(axis=Axis((0, -27.1354626519, 0), (0, 0, -1)), mode=Mode.SUBTRACT)

    # F6_s39 → F6_t40 (revolve, cut)
    with BuildSketch(Plane.XZ):
        with BuildLine():
            ThreePointArc((6.8, 0), (6.0928932188, 0.2928932188), (5.8, 1))
            Line((5.8, 1), (5.8, 0))
            Line((5.8, 0), (6.8, 0))
        make_face()
    revolve(axis=Axis((0, 0, 0), (0, 0, -1)), mode=Mode.SUBTRACT)


solid = f1.part
